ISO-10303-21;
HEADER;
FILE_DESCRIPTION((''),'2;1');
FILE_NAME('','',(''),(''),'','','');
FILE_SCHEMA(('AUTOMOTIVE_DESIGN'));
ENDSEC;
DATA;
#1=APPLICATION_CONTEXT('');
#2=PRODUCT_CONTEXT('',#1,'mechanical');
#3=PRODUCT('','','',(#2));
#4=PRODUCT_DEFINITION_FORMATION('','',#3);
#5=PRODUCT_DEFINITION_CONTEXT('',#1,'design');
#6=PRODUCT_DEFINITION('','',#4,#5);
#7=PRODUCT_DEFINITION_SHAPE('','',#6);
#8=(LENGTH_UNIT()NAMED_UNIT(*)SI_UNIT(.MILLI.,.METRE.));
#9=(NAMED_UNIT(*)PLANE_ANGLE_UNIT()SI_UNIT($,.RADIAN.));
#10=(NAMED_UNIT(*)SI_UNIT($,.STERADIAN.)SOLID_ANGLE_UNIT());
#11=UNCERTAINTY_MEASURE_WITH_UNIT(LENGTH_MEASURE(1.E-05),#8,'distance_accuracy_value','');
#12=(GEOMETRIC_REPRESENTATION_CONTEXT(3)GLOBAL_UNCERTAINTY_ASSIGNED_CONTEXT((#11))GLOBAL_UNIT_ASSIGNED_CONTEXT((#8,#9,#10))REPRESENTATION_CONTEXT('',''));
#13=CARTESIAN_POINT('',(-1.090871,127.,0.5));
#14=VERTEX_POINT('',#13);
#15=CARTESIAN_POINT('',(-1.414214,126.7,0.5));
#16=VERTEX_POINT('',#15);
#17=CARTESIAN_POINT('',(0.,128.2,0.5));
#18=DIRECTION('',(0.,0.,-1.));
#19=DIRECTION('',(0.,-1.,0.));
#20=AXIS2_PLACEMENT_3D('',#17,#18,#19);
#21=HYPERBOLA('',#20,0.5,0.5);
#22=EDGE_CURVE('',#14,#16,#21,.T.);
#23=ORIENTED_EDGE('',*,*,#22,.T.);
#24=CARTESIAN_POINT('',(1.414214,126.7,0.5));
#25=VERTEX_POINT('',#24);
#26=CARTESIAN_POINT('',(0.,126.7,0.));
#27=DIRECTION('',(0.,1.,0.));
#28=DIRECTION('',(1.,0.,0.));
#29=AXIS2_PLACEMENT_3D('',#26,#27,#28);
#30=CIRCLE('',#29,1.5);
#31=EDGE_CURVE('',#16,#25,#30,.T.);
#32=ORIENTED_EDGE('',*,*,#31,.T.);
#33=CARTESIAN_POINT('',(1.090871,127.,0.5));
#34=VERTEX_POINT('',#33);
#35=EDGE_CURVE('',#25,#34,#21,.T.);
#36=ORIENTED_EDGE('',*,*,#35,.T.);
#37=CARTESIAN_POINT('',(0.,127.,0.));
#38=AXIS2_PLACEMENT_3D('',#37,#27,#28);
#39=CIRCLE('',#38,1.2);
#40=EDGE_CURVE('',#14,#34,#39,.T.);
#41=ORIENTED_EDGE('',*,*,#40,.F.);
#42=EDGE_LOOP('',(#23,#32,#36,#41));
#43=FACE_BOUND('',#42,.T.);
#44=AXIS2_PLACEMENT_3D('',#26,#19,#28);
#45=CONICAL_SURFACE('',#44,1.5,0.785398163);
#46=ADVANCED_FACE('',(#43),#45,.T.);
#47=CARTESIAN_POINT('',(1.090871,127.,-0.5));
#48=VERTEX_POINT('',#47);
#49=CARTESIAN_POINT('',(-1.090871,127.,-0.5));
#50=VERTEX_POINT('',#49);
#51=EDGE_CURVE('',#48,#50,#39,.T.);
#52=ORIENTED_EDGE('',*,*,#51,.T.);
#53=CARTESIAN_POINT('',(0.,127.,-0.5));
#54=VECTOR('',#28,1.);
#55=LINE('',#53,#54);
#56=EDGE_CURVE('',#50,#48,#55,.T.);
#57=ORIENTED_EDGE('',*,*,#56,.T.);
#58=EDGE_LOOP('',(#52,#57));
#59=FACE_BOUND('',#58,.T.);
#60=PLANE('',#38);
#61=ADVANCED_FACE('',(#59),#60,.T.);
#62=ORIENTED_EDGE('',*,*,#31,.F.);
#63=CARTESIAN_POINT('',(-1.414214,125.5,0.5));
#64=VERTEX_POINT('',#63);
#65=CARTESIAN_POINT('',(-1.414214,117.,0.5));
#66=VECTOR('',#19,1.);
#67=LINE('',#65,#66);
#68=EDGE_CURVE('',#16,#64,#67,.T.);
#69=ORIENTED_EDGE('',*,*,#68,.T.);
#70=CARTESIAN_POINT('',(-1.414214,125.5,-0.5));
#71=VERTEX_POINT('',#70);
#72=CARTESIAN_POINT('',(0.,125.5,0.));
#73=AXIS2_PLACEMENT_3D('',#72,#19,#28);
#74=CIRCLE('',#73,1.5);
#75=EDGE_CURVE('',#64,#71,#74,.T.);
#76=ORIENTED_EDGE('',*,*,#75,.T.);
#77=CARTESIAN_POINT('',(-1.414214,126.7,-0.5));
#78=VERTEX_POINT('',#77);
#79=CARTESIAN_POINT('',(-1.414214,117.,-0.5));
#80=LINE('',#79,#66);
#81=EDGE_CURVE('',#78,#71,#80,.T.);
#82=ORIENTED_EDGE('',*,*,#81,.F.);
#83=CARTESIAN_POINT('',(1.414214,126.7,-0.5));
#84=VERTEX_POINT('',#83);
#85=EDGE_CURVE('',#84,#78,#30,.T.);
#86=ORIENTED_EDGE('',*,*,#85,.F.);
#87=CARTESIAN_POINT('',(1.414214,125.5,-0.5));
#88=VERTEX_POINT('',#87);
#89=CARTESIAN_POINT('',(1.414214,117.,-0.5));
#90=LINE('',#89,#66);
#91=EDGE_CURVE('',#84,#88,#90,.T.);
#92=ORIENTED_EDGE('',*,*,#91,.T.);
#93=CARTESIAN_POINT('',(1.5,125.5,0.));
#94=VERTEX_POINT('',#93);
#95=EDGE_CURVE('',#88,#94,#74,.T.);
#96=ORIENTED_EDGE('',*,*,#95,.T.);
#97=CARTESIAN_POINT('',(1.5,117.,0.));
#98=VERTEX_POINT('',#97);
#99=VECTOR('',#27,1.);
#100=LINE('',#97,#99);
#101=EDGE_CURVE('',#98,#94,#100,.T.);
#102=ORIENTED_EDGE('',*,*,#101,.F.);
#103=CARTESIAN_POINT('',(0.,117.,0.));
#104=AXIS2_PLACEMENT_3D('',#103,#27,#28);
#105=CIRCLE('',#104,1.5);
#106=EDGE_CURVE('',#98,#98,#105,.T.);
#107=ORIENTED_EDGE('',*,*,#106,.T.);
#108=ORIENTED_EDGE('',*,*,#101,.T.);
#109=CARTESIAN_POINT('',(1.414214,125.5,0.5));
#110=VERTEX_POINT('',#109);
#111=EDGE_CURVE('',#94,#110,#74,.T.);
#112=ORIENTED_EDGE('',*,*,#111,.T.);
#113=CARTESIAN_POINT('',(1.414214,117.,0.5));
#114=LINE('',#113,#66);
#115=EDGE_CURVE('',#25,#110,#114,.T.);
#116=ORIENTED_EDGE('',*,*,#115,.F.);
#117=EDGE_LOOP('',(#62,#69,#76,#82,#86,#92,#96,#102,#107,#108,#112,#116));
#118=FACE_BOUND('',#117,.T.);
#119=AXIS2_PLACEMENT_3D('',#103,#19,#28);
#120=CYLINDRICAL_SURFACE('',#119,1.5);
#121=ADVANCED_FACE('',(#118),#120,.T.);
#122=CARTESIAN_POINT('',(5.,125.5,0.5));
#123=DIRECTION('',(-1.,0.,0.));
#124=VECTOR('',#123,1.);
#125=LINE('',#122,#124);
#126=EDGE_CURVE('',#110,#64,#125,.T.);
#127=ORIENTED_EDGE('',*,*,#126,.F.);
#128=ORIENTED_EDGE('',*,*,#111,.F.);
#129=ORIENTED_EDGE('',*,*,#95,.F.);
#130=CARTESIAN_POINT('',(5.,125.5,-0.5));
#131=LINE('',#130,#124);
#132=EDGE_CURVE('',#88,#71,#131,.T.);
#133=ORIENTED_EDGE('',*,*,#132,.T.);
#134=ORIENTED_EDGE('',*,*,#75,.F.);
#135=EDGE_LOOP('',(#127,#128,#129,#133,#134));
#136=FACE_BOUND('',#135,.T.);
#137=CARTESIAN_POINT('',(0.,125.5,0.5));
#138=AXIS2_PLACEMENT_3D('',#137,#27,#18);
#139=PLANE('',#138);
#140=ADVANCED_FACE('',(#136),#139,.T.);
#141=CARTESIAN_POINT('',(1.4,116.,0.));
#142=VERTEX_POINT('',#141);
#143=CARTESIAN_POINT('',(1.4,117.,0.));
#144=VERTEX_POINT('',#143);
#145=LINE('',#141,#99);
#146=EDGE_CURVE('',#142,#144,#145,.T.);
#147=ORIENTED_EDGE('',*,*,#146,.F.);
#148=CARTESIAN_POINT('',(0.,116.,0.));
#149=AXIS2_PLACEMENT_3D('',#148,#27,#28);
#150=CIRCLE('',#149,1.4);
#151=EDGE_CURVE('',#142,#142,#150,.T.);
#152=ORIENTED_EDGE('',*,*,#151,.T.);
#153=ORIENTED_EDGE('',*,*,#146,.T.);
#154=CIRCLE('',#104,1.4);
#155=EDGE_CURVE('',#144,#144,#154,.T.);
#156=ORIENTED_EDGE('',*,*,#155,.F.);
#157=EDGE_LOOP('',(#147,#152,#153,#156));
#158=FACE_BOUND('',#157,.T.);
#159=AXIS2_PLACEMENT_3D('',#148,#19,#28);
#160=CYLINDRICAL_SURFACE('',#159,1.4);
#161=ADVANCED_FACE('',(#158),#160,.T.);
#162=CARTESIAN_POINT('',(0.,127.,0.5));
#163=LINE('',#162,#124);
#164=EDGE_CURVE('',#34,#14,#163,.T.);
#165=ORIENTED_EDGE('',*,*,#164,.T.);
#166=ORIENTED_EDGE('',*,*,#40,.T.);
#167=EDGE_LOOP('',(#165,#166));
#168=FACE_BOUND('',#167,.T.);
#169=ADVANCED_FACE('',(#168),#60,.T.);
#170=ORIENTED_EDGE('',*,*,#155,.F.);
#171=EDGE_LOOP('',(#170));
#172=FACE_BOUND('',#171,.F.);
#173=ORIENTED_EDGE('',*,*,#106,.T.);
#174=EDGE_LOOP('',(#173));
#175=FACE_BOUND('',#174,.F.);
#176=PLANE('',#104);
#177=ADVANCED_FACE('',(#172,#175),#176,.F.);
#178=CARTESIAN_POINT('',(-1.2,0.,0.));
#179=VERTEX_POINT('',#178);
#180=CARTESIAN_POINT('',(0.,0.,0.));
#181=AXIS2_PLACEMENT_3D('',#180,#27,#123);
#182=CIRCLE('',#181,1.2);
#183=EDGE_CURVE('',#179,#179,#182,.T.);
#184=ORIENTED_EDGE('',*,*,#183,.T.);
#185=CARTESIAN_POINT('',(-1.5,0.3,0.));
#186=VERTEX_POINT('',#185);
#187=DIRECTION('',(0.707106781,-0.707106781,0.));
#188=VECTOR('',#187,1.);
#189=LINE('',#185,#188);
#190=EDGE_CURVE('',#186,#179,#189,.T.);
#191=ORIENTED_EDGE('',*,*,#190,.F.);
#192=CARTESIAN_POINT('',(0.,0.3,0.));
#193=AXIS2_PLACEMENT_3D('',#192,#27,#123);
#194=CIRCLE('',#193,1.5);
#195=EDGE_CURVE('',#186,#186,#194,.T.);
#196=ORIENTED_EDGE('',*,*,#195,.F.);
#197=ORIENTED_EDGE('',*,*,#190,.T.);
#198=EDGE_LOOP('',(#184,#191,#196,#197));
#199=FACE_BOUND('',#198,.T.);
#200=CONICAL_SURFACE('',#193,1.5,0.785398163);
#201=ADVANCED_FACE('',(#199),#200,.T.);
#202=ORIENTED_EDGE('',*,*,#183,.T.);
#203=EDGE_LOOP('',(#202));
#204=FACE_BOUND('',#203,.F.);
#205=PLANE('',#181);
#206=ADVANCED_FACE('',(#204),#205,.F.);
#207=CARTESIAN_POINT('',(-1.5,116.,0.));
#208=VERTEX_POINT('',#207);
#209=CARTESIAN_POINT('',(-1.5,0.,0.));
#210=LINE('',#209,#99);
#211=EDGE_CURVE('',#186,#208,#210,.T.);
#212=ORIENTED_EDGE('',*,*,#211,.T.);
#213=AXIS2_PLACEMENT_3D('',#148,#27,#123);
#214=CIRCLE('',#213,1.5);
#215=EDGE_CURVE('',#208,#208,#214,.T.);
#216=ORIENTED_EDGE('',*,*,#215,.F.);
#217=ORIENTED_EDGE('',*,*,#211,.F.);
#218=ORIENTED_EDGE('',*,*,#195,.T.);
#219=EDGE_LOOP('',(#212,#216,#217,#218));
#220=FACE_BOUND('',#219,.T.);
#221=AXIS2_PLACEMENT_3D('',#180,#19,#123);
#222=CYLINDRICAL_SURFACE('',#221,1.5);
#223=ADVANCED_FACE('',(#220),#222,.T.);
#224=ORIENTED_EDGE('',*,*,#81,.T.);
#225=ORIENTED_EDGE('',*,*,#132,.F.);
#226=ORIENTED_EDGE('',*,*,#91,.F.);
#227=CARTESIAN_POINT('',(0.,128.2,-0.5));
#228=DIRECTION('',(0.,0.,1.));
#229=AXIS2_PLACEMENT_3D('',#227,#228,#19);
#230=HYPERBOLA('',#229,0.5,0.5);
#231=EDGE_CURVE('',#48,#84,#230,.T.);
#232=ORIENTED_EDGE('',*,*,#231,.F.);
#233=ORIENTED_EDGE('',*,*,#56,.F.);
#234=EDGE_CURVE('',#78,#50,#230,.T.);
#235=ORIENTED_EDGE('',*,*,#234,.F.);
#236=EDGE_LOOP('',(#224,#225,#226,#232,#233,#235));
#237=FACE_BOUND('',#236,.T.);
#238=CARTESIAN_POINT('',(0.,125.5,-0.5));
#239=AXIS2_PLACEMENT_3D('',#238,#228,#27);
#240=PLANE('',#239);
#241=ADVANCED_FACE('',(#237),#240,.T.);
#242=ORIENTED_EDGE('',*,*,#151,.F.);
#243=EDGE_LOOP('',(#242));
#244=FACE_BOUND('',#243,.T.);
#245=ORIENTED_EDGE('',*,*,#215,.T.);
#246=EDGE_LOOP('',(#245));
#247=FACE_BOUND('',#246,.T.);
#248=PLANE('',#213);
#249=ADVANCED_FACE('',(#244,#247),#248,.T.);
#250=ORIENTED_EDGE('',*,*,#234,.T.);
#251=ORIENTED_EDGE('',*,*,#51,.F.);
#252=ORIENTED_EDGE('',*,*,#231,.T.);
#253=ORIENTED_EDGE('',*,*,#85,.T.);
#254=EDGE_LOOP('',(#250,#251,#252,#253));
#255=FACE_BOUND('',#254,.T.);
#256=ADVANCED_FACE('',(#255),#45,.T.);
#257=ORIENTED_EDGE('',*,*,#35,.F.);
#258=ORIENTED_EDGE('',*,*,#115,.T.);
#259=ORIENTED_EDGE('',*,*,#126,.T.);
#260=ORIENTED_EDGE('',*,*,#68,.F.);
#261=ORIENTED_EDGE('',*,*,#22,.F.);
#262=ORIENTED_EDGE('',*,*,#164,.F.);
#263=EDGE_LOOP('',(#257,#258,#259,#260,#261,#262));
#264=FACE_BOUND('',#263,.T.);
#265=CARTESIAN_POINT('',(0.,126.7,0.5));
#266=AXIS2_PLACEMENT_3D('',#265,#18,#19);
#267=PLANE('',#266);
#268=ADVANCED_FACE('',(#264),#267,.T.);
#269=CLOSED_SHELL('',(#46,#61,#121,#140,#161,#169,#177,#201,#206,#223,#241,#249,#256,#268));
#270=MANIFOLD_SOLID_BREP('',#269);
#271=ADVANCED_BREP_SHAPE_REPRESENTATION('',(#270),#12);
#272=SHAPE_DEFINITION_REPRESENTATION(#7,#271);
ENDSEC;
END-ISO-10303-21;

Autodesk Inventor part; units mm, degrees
ref_plane "YZ Plane" through (0, 0, 0) normal (1, 0, 0) x (0, 1, 0)
ref_plane "XZ Plane" through (0, 0, 0) normal (0, 1, 0) x (-1, 0, 0)
ref_plane "XY Plane" through (0, 0, 0) normal (0, 0, 1) x (1, 0, 0)
sketch "Sketch1" plane through (0, 0, 0) normal (0, 1, 0) x (-1, 0, 0)
  circle A0 centre (0, 0) radius 1.5
  dimension "d0" = 3
extrude "Extrusion1" add sketch "Sketch1" along normal blind 116
sketch "Sketch2" plane through (0, 116, 0) normal (0, 1, 0) x (1, 0, 0)
  circle A0 centre (0, 0) radius 1.4
  dimension "d3" = 2.8
extrude "Extrusion2" add sketch "Sketch2" along normal blind 1
sketch "Sketch3" plane through (0, 117, 0) normal (0, 1, 0) x (1, 0, 0)
  circle A0 centre (0, 0) radius 1.5
  dimension "d6" = 3
extrude "Extrusion3" add sketch "Sketch3" along normal blind 10
thread "Thread1" size "M3x0.5" class "6g" standard "ANSI Metric M Profile" full length
chamfer "Chamfer1" distance 0.3 angle 45 1 edges at (-1.5, 127, 0)
chamfer "Chamfer2" distance 0.3 angle 45 1 edges at (1.5, 0, 0)
sketch "Sketch4" plane through (0, 0, 0) normal (1, 0, 0) x (0, 1, 0)
  line L0 (117, -1.5) -> (117, 1.5) projected
  line L1 (126.7, -1.5) -> (126.7, 1.5) projected
  line L2 (126.7, -1.5) -> (126.7, 1.5) projected
  line L3 (127, 1.2) -> (127, -1.2) projected
  line L4 (128.5, 0.5) -> (125.5, 0.5)
  line L5 (125.5, 0.5) -> (125.5, -0.5)
  line L6 (125.5, -0.5) -> (128.5, -0.5)
  line L7 (128.5, -0.5) -> (128.5, 0.5)
  line L8 (127, 1.2) -> (127, -1.2) projected
  line L9 (128.5, 0.5) -> (125.5, -0.5) construction
  line L10 (125.5, 0.5) -> (128.5, -0.5) construction
  point P0 (0, 0)
  point P1 (127, 0)
  dimension "d17" = 3
  dimension "d18" = 1
extrude "Extrusion4" cut sketch "Sketch4" along normal mid plane 10
properties part number "wał_prowadzący_hamulca_długi" material "Aluminum 6061"
